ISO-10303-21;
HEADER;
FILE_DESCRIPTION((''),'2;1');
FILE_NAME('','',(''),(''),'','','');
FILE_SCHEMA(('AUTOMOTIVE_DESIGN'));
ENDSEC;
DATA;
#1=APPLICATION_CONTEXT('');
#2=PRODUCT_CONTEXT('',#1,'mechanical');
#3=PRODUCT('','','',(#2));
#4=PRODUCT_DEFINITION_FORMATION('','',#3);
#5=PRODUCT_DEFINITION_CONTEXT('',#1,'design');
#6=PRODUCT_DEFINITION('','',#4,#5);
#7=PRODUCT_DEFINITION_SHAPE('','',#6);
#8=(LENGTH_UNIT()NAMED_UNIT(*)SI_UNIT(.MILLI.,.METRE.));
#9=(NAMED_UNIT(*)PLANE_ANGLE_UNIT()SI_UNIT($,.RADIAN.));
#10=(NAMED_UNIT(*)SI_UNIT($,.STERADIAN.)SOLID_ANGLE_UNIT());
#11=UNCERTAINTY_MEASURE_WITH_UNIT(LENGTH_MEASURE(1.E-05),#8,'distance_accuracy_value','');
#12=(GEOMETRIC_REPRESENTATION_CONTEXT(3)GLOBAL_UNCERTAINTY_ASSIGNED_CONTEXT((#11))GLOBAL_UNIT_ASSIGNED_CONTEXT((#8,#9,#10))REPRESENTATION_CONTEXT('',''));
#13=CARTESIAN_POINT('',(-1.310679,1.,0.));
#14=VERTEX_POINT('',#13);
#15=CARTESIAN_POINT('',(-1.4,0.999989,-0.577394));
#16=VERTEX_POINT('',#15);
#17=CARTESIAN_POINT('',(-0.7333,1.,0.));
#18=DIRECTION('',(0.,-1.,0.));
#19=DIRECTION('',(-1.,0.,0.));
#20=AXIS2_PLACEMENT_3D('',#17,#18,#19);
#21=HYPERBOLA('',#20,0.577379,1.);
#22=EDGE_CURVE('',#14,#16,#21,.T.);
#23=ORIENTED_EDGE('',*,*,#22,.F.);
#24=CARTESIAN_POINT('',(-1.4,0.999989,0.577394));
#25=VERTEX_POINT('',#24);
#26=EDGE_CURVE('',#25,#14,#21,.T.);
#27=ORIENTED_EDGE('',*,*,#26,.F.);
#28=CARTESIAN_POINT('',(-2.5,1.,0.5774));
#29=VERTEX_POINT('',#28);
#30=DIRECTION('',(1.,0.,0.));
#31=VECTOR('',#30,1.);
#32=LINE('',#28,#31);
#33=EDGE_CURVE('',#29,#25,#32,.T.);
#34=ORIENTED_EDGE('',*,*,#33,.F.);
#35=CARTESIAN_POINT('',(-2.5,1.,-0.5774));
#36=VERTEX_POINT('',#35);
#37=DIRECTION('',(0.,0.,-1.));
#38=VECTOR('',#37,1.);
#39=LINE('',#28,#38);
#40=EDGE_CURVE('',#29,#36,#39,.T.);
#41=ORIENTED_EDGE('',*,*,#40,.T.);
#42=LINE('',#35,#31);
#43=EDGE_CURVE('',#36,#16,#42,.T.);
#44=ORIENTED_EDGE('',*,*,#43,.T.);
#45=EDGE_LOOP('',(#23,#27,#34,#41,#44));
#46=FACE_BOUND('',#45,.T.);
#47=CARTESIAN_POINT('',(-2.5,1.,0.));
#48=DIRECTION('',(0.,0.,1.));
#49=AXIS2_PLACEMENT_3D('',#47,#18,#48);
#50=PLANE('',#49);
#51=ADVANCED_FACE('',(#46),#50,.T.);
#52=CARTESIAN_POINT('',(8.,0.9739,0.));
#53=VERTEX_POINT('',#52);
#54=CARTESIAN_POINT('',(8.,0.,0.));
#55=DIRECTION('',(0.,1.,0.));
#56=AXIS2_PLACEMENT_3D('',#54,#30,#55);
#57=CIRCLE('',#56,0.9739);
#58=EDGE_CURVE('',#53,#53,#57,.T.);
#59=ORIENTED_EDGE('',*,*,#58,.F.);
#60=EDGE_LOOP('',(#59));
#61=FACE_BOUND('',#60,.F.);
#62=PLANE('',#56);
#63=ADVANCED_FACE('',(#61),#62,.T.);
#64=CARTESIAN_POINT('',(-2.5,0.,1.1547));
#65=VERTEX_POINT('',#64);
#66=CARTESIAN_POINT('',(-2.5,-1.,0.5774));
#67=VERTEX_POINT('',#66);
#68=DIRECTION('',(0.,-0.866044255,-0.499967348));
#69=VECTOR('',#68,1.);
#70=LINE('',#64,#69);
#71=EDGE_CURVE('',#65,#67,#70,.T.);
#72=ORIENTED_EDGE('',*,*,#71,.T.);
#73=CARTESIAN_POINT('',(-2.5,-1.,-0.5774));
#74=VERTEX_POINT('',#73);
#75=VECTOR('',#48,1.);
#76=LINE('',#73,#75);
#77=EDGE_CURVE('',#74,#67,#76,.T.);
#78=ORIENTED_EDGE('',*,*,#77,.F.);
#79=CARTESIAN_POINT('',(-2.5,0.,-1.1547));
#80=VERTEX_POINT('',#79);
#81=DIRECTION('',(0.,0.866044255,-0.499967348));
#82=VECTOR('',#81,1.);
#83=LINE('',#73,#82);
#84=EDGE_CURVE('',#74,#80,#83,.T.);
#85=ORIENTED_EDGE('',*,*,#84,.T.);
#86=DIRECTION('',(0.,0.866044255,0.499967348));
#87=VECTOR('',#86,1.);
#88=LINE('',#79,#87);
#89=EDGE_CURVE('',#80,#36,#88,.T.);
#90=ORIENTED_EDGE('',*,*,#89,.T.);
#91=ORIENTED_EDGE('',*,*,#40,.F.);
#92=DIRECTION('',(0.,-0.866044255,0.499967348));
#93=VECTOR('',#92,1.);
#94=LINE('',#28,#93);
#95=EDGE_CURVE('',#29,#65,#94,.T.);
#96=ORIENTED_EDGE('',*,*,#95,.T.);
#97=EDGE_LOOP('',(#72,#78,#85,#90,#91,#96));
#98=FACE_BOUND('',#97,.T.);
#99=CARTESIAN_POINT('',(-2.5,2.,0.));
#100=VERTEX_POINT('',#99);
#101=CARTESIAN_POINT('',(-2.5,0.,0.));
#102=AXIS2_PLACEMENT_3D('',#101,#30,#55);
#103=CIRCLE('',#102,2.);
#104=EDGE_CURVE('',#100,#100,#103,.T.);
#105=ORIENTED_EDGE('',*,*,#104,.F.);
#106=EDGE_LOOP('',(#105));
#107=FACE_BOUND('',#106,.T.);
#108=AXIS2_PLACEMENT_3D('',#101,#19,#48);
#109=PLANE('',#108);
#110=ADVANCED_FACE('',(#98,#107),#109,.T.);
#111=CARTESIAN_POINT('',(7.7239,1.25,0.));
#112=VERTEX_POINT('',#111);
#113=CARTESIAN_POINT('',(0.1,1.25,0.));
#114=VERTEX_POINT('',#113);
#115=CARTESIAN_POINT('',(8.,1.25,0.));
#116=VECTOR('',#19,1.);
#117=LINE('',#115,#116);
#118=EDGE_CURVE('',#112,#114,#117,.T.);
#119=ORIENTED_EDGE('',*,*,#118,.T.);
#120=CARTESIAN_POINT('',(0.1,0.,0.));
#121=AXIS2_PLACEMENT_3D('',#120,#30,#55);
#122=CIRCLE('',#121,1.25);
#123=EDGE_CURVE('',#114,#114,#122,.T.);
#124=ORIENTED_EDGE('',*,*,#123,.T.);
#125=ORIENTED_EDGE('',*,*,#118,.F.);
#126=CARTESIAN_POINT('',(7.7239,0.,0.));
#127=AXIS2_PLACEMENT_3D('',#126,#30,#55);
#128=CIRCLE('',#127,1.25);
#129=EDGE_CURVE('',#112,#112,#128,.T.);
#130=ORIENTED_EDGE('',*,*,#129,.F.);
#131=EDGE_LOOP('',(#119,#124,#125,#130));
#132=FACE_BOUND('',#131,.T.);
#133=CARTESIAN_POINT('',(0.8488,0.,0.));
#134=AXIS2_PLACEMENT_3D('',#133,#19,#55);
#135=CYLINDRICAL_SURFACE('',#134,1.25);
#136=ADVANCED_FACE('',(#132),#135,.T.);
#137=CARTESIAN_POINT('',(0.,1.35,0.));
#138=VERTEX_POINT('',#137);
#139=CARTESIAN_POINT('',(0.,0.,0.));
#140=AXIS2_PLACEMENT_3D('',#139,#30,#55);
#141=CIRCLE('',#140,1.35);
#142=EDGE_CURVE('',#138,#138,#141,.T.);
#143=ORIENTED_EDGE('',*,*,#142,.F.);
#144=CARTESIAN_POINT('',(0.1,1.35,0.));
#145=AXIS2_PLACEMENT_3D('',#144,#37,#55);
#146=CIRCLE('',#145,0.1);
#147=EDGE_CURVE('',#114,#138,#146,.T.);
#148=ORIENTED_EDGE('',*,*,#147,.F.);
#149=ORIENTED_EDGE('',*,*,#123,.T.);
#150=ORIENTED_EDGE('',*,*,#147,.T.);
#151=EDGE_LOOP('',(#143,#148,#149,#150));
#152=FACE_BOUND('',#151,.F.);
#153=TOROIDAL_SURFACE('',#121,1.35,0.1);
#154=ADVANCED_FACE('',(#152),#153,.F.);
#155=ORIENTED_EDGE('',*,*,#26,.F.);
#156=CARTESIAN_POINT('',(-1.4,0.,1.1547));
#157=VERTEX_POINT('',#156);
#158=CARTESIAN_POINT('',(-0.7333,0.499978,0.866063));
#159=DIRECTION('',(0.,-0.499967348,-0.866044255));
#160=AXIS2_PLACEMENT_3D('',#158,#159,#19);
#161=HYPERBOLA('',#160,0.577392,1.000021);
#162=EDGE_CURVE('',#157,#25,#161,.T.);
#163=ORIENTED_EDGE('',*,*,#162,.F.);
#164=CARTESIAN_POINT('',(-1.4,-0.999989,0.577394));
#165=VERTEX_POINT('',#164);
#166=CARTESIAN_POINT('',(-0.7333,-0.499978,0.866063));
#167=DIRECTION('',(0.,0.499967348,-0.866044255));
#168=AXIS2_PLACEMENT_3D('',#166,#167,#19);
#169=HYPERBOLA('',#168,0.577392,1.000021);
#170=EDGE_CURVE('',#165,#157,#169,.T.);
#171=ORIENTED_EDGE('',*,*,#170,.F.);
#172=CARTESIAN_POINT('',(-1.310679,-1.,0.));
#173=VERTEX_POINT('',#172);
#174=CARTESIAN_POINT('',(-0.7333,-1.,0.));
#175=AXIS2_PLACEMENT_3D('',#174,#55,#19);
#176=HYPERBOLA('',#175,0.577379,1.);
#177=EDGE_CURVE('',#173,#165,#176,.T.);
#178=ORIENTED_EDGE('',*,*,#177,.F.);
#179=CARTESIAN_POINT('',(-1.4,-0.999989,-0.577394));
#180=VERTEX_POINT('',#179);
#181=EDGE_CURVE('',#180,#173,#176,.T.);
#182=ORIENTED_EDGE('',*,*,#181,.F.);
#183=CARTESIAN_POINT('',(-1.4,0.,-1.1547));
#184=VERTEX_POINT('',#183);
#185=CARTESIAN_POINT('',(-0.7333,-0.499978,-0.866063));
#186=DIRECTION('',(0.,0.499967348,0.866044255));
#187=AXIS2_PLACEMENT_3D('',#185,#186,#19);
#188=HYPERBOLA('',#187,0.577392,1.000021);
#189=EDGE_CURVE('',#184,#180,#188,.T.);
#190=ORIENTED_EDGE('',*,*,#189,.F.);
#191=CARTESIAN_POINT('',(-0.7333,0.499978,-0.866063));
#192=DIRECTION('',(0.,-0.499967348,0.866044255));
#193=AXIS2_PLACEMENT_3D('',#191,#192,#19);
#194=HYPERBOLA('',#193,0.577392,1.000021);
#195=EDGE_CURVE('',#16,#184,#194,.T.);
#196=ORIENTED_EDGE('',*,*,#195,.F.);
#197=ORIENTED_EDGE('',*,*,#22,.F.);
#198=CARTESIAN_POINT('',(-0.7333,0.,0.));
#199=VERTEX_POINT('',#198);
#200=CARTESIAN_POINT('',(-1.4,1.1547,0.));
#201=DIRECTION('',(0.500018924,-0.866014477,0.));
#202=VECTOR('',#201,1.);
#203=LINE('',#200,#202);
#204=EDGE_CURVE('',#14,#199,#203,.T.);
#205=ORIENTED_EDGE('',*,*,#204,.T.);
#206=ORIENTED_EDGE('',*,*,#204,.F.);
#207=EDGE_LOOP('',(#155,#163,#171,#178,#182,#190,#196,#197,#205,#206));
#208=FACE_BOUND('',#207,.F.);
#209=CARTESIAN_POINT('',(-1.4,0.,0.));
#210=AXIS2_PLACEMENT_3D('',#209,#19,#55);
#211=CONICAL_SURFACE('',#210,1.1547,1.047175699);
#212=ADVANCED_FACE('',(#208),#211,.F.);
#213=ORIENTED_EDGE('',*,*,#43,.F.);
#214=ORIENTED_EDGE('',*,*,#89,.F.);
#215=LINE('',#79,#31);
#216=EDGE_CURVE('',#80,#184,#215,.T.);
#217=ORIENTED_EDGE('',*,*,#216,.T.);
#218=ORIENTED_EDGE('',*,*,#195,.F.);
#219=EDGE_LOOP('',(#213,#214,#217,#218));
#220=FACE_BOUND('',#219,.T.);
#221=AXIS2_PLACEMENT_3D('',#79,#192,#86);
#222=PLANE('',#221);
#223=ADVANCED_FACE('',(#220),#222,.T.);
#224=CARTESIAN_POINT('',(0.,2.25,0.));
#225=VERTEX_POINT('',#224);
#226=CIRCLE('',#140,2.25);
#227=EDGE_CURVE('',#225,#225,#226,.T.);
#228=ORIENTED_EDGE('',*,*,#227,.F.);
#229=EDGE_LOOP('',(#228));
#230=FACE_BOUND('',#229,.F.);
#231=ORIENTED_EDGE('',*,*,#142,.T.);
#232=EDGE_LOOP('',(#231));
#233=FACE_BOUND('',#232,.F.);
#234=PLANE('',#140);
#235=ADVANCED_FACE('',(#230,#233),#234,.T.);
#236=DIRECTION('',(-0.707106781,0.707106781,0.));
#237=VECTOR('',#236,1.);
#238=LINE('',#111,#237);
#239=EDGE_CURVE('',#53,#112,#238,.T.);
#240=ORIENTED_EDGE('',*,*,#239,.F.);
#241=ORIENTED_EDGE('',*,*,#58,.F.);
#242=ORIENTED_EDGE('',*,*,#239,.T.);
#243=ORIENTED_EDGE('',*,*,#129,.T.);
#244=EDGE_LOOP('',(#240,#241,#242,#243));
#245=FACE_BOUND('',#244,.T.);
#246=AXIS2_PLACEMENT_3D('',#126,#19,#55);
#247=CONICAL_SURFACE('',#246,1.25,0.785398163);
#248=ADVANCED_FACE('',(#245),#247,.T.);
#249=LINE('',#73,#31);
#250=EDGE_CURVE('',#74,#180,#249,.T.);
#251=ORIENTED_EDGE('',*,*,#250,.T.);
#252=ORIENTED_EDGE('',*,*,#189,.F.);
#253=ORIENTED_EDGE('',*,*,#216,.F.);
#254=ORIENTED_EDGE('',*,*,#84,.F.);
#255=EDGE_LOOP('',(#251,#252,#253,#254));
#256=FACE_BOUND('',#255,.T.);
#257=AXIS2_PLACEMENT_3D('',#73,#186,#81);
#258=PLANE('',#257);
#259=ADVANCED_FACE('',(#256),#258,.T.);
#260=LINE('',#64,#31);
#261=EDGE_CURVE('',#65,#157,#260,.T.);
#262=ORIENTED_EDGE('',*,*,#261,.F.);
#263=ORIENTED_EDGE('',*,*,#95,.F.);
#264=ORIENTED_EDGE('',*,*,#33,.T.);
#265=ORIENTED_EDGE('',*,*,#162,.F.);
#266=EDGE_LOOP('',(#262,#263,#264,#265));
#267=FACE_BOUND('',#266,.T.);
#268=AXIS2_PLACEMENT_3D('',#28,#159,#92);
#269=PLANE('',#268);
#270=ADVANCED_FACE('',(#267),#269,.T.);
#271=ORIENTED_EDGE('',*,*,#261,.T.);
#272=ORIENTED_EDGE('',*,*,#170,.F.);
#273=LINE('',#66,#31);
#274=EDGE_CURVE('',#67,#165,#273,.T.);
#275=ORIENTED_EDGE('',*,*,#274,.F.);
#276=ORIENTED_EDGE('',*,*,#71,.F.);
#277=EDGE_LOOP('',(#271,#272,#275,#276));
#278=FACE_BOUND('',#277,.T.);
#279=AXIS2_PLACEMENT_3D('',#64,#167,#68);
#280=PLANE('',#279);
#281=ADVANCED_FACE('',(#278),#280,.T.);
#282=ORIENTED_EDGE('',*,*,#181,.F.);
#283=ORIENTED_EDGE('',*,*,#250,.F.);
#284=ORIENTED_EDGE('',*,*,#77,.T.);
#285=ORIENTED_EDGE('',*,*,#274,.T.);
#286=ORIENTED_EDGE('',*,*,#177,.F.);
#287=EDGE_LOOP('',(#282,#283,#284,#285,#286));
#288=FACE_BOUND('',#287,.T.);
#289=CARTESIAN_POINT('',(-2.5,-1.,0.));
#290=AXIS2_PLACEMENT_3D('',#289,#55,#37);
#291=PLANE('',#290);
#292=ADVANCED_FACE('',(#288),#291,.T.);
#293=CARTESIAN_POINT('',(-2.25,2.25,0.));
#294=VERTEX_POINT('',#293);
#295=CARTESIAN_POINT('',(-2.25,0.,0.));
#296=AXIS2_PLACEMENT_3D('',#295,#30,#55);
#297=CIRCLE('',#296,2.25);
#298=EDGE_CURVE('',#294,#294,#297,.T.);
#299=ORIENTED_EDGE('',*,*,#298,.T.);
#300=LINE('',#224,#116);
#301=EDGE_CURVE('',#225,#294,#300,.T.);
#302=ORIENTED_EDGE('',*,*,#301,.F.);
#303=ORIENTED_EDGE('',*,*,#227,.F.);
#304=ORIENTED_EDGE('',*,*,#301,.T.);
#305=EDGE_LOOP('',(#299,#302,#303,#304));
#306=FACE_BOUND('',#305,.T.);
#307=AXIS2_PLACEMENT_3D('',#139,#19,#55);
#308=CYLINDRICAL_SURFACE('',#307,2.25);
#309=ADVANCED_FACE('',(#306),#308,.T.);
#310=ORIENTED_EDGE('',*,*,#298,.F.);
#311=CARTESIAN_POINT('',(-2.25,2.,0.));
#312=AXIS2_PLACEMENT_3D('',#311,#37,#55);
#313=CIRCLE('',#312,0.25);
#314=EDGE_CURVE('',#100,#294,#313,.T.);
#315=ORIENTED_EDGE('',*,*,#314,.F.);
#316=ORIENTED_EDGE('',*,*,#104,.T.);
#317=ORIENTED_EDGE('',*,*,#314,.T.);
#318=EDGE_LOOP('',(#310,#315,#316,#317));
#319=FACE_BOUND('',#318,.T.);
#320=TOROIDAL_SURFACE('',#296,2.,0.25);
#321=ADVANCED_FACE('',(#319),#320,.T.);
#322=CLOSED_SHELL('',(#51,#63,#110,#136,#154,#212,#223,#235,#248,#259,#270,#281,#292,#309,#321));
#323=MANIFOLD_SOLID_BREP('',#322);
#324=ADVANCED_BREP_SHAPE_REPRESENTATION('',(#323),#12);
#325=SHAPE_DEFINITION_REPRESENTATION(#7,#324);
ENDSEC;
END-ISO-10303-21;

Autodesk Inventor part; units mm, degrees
ref_plane "YZ Plane" through (0, 0, 0) normal (1, 0, 0) x (0, 1, 0)
ref_plane "XZ Plane" through (0, 0, 0) normal (0, 1, 0) x (-1, 0, 0)
sketch "Skizze1" plane through (0, 0, 0) normal (0, 0, 1) x (1, 0, 0)
  line L0 (-0.7333, 0) -> (8, 0)
  line L1 (8, 0) -> (8, 1.25)
  line L2 (8, 1.25) -> (1.125, 1.25)
  line L3 (1.125, 1.25) -> (0.8488, 1.25)
  line L4 (0.8488, 1.25) -> (0, 1.25)
  line L5 (0, 1.25) -> (0, 2.25)
  line L6 (0, 2.25) -> (-2.5, 2.25)
  line L7 (-2.5, 2.25) -> (-2.5, 1.1547)
  line L8 (-2.5, 1.1547) -> (-1.4, 1.1547)
  line L9 (-1.4, 1.1547) -> (-0.7333, 0)
  line L10 (-4.6, 0) -> (10.1, 0) projected
  line L11 (0, -0.45) -> (0, 2.7) projected
  line L12 (1.125, 1.25) -> (0, 1.25) construction
  dimension "d1" = 6.875
  dimension "d2" = 0.2762
  dimension "d3" = 2.5
  dimension "d4" = 1.1
  dimension "d5" = 60
  dimension "d6" = 2.5
  dimension "d7" = 2.5
  dimension "d8" = 2.3094
  dimension "d9" = 4.5
  dimension "d26" = 8
revolve "Körper" add sketch "Skizze1" angle 360 about axis through (-0.7333, 0, 0) along (1, 0, 0)
sketch "Skizze2" plane through (-2.5, 0, 0) normal (-1, 0, 0) x (0, 0, 1)
  circle A0 centre (0, 0) radius 1.1547 projected
  line L0 (0, -3.15) -> (0, 3.15) projected
  line L1 (-3.15, 0) -> (3.15, 0) projected
  line L2 (1.1547, 0) -> (0.5774, -1)
  line L3 (0.5774, -1) -> (-0.5774, -1)
  line L4 (-0.5774, -1) -> (-1.1547, 0)
  line L5 (-1.1547, 0) -> (-0.5774, 1)
  line L6 (-0.5774, 1) -> (0.5774, 1)
  line L7 (0.5774, 1) -> (1.1547, 0)
extrude "Loch" add sketch "Skizze2" against normal up to next contours L7 A0 | A0 L2 | L6 L0 A0 | A0 L0 L3 | L0 L6 A0 | A0 L3 L0 | L4 A0 | A0 L5
fillet "Rundung1" radius 0.25 1 edges at (-2.5, -2.25, 0)
thread "Gewinde" size "M2.5x0.45" class "6g" standard "ISO Metric profile" length 6.875
chamfer "Fase1" distance 0.2761 distance2 0.2761 1 edges at (8, -1.25, 0) measured on face at (8, 0.4797, 0.7189)
ref_plane "Work Plane1" through (29, 0, 0) normal (0, -1, 0) x (1, 0, 0)
fillet "Fillet2" radius 0.1 1 edges at (0, -1.25, 0)
equation "\"d30\" = R"
equation "\"d15\" = -0.5 * SPD + 0.5 * GD"
equation "\"d16\" = GUL"
equation "\"d17\" = RR"
equation "\"d13\" = GEL"
equation "\"d1\" = GEL"
equation "\"d3\" = KOH"
equation "\"d4\" = INTI"
equation "\"d6\" = GD"
equation "\"d7\" = BDM"
equation "\"d8\" = 1.1547 * SW"
equation "\"d9\" = KOD"
equation "\"d26\" = NLG"
equation "\"GD\" = NND"
equation "\"NLG\" = 8"
equation "\"GEL\" = 6.875"
equation "\"KOD\" = 4.5"
equation "\"KOH\" = 2.5"
equation "\"INTI\" = 1.1"
equation "\"GAL\" = 0.61345 * PTC"
equation "\"GUL\" = 0.61345 * PTC"
equation "\"BDM\" = NND"
equation "\"SW\" = 2"
equation "\"RR\" = 0.25"
equation "\"SPD\" = NND - 1.2269 * PTC"
equation "\"R\" = 0.1"
equation "\"TOA\" = 30deg"
equation "\"GD1\" = THREADDIA - 1.2269 * PTC"
equation "\"THREADDIA\" = 2.5"
equation "\"FAWI\" = 45deg"
equation "\"ANG\" = 120deg"
equation "\"PTC\" = 0.45"
equation "\"NND\" = 2.5"
equation "\"E0\" = 1.155 * SW"
properties part number "DIN 912 - M2,5 x 8" material "Stahl, weich"
